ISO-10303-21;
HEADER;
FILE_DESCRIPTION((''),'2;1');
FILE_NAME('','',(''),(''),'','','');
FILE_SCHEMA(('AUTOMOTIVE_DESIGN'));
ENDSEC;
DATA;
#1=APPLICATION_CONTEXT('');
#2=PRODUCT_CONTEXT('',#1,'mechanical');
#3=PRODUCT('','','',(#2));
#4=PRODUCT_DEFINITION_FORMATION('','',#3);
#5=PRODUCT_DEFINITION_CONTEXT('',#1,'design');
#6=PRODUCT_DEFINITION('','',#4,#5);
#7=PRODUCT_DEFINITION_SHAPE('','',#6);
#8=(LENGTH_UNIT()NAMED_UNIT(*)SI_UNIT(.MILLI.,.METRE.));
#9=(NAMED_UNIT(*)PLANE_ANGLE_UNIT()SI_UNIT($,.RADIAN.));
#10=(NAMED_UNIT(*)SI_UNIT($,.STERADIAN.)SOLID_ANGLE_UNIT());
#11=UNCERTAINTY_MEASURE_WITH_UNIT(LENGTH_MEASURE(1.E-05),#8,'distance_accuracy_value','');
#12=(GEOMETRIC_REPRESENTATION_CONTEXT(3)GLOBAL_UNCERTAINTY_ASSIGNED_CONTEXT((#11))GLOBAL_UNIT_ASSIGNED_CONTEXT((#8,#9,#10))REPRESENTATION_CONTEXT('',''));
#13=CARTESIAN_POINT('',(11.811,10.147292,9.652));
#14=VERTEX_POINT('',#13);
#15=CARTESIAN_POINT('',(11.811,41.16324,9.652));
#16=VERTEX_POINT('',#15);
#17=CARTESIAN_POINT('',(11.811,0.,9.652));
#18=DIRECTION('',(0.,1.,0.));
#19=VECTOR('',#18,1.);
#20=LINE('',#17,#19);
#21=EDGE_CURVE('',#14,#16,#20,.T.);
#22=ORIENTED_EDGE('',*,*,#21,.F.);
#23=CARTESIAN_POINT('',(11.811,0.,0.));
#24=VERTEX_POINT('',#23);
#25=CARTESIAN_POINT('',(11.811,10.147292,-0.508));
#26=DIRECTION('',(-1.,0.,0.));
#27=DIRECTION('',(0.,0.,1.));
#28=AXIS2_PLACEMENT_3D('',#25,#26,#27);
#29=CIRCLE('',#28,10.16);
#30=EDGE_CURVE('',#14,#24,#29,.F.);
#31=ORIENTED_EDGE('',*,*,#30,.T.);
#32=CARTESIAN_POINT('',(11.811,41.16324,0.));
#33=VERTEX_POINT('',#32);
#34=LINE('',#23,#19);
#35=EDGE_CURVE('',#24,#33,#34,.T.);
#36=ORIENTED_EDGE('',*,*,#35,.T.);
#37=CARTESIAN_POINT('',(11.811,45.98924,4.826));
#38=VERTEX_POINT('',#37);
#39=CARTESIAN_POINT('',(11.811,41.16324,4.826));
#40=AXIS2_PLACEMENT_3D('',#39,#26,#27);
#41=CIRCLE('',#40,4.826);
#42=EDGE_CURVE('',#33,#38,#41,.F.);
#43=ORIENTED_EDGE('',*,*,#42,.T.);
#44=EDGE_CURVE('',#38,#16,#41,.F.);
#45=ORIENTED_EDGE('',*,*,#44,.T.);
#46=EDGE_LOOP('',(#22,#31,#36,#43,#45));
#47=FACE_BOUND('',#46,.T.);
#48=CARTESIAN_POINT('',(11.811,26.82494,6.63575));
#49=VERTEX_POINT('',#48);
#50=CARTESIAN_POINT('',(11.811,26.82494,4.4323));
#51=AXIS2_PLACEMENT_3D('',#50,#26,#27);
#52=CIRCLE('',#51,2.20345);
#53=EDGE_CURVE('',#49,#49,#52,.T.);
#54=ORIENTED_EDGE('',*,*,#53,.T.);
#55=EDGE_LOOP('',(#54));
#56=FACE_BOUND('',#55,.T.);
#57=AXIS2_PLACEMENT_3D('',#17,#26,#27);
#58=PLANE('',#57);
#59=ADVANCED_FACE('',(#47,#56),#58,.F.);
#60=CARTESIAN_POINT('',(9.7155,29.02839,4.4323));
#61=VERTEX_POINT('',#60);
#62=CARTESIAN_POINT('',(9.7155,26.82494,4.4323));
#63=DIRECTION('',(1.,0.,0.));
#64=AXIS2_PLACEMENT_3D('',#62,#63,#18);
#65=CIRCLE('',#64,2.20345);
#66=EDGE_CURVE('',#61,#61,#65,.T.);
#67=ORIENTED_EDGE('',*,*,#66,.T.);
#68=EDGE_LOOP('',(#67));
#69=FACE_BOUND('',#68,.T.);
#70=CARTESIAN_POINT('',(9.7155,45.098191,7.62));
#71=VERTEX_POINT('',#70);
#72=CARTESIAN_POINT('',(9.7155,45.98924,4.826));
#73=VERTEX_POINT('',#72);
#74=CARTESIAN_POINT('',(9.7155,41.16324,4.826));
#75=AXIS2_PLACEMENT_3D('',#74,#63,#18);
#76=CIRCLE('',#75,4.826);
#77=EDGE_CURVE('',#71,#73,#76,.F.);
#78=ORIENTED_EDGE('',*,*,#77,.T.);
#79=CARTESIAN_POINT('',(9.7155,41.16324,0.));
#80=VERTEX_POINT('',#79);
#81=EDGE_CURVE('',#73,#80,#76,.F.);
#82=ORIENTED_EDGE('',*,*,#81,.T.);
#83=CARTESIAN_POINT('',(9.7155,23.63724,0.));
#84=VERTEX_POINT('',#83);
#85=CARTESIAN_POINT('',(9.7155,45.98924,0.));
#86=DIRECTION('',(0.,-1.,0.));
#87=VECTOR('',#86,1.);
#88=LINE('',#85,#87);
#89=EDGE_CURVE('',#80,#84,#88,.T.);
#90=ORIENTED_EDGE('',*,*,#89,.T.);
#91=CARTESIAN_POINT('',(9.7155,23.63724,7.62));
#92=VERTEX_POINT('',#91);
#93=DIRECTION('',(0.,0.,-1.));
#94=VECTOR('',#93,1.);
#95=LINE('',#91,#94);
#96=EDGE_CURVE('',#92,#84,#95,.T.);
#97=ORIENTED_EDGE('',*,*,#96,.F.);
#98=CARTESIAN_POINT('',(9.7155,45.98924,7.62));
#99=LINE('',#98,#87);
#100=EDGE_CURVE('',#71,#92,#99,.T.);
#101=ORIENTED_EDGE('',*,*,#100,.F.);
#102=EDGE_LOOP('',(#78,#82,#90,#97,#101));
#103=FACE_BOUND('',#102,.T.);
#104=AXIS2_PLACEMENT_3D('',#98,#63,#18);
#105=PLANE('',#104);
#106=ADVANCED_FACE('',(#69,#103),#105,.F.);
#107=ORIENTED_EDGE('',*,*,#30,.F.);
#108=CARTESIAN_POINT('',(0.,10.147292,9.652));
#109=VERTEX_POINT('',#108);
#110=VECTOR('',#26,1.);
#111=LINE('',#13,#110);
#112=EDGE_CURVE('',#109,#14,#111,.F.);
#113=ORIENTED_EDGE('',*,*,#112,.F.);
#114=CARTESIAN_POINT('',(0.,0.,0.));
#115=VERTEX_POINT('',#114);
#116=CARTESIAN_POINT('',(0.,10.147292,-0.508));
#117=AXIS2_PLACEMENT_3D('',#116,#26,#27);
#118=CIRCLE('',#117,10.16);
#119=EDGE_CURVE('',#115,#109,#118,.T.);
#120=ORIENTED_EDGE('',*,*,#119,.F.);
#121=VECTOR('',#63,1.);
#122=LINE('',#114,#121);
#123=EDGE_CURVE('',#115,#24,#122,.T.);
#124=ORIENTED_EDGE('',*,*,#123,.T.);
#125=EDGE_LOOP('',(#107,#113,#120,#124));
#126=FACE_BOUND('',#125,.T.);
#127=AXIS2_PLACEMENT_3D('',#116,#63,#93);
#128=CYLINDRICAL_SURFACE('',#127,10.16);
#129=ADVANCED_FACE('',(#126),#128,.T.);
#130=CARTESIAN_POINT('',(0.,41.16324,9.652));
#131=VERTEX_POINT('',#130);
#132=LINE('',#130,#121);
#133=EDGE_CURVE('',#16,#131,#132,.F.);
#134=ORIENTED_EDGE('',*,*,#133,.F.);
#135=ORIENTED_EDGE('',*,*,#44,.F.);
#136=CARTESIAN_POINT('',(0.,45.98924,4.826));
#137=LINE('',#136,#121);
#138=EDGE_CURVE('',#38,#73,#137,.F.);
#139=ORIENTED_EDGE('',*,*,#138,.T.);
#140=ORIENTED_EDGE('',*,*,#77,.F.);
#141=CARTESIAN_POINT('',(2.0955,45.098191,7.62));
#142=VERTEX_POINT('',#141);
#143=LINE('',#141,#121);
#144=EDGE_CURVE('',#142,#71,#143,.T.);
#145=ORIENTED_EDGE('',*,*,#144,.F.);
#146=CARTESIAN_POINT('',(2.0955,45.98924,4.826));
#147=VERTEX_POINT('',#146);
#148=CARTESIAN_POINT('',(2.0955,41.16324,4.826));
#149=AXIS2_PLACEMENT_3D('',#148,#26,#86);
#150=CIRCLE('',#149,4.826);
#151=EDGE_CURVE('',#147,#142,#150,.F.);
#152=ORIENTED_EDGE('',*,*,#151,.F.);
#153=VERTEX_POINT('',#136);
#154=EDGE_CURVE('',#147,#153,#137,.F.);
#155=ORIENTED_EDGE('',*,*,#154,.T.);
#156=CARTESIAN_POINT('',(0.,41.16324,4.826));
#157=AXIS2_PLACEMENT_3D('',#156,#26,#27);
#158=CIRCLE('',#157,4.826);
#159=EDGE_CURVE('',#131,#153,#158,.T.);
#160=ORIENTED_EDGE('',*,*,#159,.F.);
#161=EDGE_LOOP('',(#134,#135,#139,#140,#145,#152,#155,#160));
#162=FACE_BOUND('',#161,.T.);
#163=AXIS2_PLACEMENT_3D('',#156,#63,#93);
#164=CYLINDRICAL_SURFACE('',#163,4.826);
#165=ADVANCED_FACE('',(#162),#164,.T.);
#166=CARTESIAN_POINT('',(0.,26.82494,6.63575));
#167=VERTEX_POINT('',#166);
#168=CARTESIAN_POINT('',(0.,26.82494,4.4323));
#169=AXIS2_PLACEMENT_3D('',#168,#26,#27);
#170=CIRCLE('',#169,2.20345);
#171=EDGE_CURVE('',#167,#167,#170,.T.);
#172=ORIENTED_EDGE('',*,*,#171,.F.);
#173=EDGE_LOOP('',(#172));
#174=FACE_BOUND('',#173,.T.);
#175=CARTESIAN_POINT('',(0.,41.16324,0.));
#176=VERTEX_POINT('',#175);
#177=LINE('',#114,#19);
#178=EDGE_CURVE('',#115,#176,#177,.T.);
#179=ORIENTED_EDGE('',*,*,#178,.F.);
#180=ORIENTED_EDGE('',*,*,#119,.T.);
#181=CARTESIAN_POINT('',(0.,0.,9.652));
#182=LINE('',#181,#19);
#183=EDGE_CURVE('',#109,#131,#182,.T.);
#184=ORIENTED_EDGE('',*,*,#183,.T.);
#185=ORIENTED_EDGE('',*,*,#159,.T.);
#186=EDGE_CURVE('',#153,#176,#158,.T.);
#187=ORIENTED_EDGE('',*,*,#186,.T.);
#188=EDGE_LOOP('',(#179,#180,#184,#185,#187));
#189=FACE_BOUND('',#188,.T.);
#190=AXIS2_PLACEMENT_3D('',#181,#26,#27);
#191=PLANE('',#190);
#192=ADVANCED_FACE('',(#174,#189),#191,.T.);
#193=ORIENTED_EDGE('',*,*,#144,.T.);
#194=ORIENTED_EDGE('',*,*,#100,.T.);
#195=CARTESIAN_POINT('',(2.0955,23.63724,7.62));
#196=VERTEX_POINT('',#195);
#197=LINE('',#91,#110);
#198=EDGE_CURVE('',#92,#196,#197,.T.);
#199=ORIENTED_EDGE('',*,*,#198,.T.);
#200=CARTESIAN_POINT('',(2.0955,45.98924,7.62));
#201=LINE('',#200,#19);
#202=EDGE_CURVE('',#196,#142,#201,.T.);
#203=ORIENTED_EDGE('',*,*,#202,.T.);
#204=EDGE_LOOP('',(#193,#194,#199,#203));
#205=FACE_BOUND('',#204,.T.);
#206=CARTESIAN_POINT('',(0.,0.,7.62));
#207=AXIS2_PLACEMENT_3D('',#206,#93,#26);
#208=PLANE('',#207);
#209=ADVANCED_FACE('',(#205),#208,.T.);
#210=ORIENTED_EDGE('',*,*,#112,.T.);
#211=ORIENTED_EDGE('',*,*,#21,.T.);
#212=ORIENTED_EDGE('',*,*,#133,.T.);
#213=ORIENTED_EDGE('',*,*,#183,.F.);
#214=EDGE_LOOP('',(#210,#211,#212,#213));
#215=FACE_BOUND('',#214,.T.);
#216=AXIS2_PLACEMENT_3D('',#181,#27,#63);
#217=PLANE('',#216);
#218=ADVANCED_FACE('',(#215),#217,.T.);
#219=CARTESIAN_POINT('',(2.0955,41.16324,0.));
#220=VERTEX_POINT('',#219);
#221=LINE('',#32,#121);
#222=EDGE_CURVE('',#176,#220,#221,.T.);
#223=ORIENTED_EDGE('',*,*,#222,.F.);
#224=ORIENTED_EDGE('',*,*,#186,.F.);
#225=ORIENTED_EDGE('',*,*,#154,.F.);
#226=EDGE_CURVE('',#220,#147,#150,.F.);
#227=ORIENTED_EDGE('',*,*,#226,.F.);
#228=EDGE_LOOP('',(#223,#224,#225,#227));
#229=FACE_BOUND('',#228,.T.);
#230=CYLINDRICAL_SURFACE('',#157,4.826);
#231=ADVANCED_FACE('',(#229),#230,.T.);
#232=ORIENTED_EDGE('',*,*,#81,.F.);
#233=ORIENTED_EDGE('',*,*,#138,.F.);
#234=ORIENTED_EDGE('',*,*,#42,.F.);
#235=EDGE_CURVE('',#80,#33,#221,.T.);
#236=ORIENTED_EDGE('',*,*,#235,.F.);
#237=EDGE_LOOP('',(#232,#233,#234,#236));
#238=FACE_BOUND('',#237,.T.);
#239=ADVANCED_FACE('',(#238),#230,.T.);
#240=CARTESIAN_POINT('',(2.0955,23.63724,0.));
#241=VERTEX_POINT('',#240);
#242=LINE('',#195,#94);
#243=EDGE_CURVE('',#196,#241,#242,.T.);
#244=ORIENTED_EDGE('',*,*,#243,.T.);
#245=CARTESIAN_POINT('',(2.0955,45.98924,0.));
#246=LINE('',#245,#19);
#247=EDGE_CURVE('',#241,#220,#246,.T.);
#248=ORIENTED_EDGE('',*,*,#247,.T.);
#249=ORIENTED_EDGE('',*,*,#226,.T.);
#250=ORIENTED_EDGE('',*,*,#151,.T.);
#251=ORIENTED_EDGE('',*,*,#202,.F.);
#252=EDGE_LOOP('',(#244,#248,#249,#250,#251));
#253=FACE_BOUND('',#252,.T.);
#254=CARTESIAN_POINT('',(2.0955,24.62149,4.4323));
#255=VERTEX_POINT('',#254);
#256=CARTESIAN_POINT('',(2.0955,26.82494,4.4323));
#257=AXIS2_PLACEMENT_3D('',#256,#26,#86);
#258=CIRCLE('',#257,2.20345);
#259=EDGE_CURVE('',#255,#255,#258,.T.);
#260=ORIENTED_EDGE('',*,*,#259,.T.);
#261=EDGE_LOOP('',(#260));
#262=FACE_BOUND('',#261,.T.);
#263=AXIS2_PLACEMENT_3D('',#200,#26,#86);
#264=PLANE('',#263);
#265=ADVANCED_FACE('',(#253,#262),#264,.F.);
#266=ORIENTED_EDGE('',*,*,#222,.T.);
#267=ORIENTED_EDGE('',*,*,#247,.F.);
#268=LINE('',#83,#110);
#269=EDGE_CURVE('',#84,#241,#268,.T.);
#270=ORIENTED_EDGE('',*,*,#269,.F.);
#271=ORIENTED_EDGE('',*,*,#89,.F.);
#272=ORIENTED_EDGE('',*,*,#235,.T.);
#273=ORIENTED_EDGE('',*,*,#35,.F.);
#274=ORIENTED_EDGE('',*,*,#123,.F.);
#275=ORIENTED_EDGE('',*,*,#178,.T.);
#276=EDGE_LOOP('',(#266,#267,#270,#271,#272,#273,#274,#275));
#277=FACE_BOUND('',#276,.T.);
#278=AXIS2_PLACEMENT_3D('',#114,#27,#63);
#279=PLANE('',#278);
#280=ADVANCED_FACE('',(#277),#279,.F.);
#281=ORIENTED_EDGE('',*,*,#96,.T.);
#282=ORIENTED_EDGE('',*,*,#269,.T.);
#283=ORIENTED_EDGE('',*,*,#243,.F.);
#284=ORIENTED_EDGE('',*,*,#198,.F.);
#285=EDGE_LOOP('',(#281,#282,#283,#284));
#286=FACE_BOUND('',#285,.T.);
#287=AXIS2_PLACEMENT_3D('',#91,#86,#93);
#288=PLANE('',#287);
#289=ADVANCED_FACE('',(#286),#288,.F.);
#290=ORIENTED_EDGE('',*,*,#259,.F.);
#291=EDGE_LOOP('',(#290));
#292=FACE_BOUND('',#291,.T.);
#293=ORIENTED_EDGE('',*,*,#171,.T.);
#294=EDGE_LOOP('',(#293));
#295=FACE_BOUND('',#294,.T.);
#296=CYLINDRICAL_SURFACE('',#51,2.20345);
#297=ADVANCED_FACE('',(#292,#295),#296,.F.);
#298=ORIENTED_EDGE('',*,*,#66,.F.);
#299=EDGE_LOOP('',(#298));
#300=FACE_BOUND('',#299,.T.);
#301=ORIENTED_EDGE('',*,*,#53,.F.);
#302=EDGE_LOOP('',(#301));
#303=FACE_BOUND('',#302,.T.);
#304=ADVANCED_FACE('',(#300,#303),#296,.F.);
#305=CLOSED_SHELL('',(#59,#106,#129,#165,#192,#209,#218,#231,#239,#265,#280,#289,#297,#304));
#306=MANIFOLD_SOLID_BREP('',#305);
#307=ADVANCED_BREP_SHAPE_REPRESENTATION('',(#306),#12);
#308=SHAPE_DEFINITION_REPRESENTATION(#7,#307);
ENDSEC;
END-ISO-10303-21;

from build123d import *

# Parameters (mm, degrees)
SKETCH1_W               = 11.811
SKETCH1_H               = 45.98924
BOSS_EXTRUDE1_DEPTH     = 9.652
FILLET5_R               = 4.826
SKETCH2_W               = 7.62
SKETCH2_H               = 22.352
CUT_EXTRUDE1_DEPTH      = 7.62
CUT_EXTRUDE2_DEPTH      = 49.452771033
CUT_EXTRUDE2_DEPTH_BACK = 49.452771033
SKETCH3_R               = 2.20345
FILLET4_R               = 4.826
FILLET6_R               = 10.16


with BuildPart() as part:
    # Sketch1 → Boss-Extrude1 (new body)
    with BuildSketch(Plane.XY):
        with Locations((5.9055, 22.99462)):
            Rectangle(SKETCH1_W, SKETCH1_H)
    extrude(amount=BOSS_EXTRUDE1_DEPTH)

    # Fillet5
    fillet5_edges = [part.edges().sort_by_distance(p)[0] for p in [
        (5.9055, 45.98924, 0),
    ]]
    fillet(fillet5_edges, radius=FILLET5_R)

    # Sketch2 → Cut-Extrude1 (cut)
    with BuildSketch(Plane(origin=(0, 0, 0), x_dir=(-1, 0, 0), z_dir=(0, 0, -1))):
        with Locations((-5.9055, 34.81324)):
            Rectangle(SKETCH2_W, SKETCH2_H)
    extrude(amount=-CUT_EXTRUDE1_DEPTH, mode=Mode.SUBTRACT)

    # Sketch3 → Cut-Extrude2 (cut, two sides: drawn at the far end of the back side and taken through both)
    with BuildSketch(Plane.ZY.offset(-CUT_EXTRUDE2_DEPTH_BACK)):
        with Locations((4.4323, 26.82494)):
            Circle(SKETCH3_R)
    extrude(amount=CUT_EXTRUDE2_DEPTH + CUT_EXTRUDE2_DEPTH_BACK, mode=Mode.SUBTRACT)

    # Fillet4
    # the kernel refuses this fillet: 4.826 mm, written as the material it takes off along each edge
    with BuildSketch(Plane(origin=(23.876, 45.98924, 9.652), x_dir=(0, 0, -1), z_dir=(-1, 0, 0))) as fillet4_piece_1:
        with BuildLine():
            CenterArc((FILLET4_R, FILLET4_R), FILLET4_R, 180, 90)
            Line((0, FILLET4_R), (0, 0))
            Line((0, 0), (FILLET4_R, 0))
        make_face()
    extrude(amount=35.941, mode=Mode.SUBTRACT)

    # Fillet6
    # the kernel refuses this fillet: 10.16 mm, written as the material it takes off along each edge
    with BuildSketch(Plane(origin=(-25.368230131, 0, 9.652), x_dir=(0, 1, 0), z_dir=(1, 0, 0))) as fillet6_piece_1:
        with BuildLine():
            CenterArc((10.147292053, -10.16), FILLET6_R, 90, 87.134016017)
            Line((0, -9.652), (-0.202945841, -9.64184))
            ThreePointArc((-0.202945841, -9.64184), (-0.2032, -4.826), (-0.2032, 0))
            Line((-0.2032, 0), (0, 0.2032))
            Line((0, 0.2032), (10.147292053, 0.2032))
            Line((10.147292053, 0.2032), (10.147292053, 0))
        make_face()
    extrude(amount=62.547460263, mode=Mode.SUBTRACT)


solid = part.part
